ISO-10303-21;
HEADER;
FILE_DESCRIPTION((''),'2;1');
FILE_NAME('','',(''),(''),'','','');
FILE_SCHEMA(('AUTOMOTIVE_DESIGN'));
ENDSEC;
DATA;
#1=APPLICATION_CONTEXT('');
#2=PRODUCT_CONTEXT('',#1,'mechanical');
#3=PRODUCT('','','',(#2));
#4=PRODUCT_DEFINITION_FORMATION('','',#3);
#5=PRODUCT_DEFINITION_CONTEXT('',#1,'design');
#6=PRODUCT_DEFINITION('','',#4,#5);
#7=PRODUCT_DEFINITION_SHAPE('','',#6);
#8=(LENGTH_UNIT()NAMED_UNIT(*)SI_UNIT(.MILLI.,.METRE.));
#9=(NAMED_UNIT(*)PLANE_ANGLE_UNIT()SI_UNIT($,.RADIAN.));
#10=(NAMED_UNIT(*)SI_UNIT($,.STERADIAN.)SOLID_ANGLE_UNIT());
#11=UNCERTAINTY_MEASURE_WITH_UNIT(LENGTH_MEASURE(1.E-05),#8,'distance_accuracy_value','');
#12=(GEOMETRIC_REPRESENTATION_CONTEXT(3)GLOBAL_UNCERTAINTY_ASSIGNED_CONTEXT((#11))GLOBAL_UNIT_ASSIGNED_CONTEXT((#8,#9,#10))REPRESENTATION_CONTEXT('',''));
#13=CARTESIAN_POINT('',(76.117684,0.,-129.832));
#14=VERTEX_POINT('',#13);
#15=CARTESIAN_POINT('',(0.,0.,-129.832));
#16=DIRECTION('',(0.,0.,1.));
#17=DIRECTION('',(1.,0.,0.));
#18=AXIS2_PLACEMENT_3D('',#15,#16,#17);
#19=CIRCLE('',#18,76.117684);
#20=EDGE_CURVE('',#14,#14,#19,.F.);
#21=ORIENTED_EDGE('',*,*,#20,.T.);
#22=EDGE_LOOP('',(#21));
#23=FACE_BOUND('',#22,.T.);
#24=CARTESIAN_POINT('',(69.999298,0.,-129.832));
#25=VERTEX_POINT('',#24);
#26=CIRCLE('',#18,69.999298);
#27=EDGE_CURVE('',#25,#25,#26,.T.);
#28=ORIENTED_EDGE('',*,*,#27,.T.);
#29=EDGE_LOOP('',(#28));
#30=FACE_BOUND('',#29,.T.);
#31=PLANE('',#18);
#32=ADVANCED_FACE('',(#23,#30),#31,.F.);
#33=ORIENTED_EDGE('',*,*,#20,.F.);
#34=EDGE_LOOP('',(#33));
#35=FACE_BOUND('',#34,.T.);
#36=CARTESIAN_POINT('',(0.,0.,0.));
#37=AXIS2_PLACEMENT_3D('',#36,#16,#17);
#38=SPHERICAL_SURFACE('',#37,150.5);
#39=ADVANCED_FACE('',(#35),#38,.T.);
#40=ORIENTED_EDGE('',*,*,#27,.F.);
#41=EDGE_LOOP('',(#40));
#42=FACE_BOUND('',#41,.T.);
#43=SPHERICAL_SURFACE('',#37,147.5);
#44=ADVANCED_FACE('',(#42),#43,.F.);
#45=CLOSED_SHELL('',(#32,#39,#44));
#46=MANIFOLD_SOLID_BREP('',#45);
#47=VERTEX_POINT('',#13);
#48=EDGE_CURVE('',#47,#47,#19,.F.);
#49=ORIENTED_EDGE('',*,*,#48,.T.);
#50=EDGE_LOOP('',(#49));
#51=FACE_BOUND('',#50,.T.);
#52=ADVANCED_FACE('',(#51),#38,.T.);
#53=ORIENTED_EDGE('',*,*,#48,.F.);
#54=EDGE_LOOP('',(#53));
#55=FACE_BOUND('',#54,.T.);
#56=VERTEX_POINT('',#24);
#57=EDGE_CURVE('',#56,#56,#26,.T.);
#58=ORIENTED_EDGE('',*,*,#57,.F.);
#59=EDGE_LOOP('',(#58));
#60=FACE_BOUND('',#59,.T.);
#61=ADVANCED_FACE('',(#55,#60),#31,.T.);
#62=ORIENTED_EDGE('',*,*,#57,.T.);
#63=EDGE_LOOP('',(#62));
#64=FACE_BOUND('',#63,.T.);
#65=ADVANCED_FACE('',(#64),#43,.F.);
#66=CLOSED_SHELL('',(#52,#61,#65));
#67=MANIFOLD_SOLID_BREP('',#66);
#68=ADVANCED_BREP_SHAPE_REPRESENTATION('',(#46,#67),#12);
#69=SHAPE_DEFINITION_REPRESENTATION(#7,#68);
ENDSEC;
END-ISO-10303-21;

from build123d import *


# Read off the part's stored shape, not the designer's step: Split1
with BuildPart() as part:
    # Sketch1 → Revolve2 (revolve)
    with BuildSketch(Plane.XY):
        with BuildLine():
            Line((0, -147.5), (0, -150.5))
            ThreePointArc((0, -150.5), (150.5, 0), (0, 150.5))
            Line((0, 150.5), (0, 147.5))
            ThreePointArc((0, 147.5), (147.5, 0), (0, -147.5))
        make_face()
    revolve(axis=Axis((0, -147.5, 0), (0, 1, 0)))


with BuildPart() as body_2:
    # Split1: the piece on the far side of the plane
    add(part.part)
    split(bisect_by=Plane.XY.offset(-129.832), keep=Keep.BOTTOM)


with BuildPart() as part_1:
    add(part.part)

    # Split1
    split(bisect_by=Plane.XY.offset(-129.832), keep=Keep.TOP)


solid = Compound([body_2.part, part_1.part])
